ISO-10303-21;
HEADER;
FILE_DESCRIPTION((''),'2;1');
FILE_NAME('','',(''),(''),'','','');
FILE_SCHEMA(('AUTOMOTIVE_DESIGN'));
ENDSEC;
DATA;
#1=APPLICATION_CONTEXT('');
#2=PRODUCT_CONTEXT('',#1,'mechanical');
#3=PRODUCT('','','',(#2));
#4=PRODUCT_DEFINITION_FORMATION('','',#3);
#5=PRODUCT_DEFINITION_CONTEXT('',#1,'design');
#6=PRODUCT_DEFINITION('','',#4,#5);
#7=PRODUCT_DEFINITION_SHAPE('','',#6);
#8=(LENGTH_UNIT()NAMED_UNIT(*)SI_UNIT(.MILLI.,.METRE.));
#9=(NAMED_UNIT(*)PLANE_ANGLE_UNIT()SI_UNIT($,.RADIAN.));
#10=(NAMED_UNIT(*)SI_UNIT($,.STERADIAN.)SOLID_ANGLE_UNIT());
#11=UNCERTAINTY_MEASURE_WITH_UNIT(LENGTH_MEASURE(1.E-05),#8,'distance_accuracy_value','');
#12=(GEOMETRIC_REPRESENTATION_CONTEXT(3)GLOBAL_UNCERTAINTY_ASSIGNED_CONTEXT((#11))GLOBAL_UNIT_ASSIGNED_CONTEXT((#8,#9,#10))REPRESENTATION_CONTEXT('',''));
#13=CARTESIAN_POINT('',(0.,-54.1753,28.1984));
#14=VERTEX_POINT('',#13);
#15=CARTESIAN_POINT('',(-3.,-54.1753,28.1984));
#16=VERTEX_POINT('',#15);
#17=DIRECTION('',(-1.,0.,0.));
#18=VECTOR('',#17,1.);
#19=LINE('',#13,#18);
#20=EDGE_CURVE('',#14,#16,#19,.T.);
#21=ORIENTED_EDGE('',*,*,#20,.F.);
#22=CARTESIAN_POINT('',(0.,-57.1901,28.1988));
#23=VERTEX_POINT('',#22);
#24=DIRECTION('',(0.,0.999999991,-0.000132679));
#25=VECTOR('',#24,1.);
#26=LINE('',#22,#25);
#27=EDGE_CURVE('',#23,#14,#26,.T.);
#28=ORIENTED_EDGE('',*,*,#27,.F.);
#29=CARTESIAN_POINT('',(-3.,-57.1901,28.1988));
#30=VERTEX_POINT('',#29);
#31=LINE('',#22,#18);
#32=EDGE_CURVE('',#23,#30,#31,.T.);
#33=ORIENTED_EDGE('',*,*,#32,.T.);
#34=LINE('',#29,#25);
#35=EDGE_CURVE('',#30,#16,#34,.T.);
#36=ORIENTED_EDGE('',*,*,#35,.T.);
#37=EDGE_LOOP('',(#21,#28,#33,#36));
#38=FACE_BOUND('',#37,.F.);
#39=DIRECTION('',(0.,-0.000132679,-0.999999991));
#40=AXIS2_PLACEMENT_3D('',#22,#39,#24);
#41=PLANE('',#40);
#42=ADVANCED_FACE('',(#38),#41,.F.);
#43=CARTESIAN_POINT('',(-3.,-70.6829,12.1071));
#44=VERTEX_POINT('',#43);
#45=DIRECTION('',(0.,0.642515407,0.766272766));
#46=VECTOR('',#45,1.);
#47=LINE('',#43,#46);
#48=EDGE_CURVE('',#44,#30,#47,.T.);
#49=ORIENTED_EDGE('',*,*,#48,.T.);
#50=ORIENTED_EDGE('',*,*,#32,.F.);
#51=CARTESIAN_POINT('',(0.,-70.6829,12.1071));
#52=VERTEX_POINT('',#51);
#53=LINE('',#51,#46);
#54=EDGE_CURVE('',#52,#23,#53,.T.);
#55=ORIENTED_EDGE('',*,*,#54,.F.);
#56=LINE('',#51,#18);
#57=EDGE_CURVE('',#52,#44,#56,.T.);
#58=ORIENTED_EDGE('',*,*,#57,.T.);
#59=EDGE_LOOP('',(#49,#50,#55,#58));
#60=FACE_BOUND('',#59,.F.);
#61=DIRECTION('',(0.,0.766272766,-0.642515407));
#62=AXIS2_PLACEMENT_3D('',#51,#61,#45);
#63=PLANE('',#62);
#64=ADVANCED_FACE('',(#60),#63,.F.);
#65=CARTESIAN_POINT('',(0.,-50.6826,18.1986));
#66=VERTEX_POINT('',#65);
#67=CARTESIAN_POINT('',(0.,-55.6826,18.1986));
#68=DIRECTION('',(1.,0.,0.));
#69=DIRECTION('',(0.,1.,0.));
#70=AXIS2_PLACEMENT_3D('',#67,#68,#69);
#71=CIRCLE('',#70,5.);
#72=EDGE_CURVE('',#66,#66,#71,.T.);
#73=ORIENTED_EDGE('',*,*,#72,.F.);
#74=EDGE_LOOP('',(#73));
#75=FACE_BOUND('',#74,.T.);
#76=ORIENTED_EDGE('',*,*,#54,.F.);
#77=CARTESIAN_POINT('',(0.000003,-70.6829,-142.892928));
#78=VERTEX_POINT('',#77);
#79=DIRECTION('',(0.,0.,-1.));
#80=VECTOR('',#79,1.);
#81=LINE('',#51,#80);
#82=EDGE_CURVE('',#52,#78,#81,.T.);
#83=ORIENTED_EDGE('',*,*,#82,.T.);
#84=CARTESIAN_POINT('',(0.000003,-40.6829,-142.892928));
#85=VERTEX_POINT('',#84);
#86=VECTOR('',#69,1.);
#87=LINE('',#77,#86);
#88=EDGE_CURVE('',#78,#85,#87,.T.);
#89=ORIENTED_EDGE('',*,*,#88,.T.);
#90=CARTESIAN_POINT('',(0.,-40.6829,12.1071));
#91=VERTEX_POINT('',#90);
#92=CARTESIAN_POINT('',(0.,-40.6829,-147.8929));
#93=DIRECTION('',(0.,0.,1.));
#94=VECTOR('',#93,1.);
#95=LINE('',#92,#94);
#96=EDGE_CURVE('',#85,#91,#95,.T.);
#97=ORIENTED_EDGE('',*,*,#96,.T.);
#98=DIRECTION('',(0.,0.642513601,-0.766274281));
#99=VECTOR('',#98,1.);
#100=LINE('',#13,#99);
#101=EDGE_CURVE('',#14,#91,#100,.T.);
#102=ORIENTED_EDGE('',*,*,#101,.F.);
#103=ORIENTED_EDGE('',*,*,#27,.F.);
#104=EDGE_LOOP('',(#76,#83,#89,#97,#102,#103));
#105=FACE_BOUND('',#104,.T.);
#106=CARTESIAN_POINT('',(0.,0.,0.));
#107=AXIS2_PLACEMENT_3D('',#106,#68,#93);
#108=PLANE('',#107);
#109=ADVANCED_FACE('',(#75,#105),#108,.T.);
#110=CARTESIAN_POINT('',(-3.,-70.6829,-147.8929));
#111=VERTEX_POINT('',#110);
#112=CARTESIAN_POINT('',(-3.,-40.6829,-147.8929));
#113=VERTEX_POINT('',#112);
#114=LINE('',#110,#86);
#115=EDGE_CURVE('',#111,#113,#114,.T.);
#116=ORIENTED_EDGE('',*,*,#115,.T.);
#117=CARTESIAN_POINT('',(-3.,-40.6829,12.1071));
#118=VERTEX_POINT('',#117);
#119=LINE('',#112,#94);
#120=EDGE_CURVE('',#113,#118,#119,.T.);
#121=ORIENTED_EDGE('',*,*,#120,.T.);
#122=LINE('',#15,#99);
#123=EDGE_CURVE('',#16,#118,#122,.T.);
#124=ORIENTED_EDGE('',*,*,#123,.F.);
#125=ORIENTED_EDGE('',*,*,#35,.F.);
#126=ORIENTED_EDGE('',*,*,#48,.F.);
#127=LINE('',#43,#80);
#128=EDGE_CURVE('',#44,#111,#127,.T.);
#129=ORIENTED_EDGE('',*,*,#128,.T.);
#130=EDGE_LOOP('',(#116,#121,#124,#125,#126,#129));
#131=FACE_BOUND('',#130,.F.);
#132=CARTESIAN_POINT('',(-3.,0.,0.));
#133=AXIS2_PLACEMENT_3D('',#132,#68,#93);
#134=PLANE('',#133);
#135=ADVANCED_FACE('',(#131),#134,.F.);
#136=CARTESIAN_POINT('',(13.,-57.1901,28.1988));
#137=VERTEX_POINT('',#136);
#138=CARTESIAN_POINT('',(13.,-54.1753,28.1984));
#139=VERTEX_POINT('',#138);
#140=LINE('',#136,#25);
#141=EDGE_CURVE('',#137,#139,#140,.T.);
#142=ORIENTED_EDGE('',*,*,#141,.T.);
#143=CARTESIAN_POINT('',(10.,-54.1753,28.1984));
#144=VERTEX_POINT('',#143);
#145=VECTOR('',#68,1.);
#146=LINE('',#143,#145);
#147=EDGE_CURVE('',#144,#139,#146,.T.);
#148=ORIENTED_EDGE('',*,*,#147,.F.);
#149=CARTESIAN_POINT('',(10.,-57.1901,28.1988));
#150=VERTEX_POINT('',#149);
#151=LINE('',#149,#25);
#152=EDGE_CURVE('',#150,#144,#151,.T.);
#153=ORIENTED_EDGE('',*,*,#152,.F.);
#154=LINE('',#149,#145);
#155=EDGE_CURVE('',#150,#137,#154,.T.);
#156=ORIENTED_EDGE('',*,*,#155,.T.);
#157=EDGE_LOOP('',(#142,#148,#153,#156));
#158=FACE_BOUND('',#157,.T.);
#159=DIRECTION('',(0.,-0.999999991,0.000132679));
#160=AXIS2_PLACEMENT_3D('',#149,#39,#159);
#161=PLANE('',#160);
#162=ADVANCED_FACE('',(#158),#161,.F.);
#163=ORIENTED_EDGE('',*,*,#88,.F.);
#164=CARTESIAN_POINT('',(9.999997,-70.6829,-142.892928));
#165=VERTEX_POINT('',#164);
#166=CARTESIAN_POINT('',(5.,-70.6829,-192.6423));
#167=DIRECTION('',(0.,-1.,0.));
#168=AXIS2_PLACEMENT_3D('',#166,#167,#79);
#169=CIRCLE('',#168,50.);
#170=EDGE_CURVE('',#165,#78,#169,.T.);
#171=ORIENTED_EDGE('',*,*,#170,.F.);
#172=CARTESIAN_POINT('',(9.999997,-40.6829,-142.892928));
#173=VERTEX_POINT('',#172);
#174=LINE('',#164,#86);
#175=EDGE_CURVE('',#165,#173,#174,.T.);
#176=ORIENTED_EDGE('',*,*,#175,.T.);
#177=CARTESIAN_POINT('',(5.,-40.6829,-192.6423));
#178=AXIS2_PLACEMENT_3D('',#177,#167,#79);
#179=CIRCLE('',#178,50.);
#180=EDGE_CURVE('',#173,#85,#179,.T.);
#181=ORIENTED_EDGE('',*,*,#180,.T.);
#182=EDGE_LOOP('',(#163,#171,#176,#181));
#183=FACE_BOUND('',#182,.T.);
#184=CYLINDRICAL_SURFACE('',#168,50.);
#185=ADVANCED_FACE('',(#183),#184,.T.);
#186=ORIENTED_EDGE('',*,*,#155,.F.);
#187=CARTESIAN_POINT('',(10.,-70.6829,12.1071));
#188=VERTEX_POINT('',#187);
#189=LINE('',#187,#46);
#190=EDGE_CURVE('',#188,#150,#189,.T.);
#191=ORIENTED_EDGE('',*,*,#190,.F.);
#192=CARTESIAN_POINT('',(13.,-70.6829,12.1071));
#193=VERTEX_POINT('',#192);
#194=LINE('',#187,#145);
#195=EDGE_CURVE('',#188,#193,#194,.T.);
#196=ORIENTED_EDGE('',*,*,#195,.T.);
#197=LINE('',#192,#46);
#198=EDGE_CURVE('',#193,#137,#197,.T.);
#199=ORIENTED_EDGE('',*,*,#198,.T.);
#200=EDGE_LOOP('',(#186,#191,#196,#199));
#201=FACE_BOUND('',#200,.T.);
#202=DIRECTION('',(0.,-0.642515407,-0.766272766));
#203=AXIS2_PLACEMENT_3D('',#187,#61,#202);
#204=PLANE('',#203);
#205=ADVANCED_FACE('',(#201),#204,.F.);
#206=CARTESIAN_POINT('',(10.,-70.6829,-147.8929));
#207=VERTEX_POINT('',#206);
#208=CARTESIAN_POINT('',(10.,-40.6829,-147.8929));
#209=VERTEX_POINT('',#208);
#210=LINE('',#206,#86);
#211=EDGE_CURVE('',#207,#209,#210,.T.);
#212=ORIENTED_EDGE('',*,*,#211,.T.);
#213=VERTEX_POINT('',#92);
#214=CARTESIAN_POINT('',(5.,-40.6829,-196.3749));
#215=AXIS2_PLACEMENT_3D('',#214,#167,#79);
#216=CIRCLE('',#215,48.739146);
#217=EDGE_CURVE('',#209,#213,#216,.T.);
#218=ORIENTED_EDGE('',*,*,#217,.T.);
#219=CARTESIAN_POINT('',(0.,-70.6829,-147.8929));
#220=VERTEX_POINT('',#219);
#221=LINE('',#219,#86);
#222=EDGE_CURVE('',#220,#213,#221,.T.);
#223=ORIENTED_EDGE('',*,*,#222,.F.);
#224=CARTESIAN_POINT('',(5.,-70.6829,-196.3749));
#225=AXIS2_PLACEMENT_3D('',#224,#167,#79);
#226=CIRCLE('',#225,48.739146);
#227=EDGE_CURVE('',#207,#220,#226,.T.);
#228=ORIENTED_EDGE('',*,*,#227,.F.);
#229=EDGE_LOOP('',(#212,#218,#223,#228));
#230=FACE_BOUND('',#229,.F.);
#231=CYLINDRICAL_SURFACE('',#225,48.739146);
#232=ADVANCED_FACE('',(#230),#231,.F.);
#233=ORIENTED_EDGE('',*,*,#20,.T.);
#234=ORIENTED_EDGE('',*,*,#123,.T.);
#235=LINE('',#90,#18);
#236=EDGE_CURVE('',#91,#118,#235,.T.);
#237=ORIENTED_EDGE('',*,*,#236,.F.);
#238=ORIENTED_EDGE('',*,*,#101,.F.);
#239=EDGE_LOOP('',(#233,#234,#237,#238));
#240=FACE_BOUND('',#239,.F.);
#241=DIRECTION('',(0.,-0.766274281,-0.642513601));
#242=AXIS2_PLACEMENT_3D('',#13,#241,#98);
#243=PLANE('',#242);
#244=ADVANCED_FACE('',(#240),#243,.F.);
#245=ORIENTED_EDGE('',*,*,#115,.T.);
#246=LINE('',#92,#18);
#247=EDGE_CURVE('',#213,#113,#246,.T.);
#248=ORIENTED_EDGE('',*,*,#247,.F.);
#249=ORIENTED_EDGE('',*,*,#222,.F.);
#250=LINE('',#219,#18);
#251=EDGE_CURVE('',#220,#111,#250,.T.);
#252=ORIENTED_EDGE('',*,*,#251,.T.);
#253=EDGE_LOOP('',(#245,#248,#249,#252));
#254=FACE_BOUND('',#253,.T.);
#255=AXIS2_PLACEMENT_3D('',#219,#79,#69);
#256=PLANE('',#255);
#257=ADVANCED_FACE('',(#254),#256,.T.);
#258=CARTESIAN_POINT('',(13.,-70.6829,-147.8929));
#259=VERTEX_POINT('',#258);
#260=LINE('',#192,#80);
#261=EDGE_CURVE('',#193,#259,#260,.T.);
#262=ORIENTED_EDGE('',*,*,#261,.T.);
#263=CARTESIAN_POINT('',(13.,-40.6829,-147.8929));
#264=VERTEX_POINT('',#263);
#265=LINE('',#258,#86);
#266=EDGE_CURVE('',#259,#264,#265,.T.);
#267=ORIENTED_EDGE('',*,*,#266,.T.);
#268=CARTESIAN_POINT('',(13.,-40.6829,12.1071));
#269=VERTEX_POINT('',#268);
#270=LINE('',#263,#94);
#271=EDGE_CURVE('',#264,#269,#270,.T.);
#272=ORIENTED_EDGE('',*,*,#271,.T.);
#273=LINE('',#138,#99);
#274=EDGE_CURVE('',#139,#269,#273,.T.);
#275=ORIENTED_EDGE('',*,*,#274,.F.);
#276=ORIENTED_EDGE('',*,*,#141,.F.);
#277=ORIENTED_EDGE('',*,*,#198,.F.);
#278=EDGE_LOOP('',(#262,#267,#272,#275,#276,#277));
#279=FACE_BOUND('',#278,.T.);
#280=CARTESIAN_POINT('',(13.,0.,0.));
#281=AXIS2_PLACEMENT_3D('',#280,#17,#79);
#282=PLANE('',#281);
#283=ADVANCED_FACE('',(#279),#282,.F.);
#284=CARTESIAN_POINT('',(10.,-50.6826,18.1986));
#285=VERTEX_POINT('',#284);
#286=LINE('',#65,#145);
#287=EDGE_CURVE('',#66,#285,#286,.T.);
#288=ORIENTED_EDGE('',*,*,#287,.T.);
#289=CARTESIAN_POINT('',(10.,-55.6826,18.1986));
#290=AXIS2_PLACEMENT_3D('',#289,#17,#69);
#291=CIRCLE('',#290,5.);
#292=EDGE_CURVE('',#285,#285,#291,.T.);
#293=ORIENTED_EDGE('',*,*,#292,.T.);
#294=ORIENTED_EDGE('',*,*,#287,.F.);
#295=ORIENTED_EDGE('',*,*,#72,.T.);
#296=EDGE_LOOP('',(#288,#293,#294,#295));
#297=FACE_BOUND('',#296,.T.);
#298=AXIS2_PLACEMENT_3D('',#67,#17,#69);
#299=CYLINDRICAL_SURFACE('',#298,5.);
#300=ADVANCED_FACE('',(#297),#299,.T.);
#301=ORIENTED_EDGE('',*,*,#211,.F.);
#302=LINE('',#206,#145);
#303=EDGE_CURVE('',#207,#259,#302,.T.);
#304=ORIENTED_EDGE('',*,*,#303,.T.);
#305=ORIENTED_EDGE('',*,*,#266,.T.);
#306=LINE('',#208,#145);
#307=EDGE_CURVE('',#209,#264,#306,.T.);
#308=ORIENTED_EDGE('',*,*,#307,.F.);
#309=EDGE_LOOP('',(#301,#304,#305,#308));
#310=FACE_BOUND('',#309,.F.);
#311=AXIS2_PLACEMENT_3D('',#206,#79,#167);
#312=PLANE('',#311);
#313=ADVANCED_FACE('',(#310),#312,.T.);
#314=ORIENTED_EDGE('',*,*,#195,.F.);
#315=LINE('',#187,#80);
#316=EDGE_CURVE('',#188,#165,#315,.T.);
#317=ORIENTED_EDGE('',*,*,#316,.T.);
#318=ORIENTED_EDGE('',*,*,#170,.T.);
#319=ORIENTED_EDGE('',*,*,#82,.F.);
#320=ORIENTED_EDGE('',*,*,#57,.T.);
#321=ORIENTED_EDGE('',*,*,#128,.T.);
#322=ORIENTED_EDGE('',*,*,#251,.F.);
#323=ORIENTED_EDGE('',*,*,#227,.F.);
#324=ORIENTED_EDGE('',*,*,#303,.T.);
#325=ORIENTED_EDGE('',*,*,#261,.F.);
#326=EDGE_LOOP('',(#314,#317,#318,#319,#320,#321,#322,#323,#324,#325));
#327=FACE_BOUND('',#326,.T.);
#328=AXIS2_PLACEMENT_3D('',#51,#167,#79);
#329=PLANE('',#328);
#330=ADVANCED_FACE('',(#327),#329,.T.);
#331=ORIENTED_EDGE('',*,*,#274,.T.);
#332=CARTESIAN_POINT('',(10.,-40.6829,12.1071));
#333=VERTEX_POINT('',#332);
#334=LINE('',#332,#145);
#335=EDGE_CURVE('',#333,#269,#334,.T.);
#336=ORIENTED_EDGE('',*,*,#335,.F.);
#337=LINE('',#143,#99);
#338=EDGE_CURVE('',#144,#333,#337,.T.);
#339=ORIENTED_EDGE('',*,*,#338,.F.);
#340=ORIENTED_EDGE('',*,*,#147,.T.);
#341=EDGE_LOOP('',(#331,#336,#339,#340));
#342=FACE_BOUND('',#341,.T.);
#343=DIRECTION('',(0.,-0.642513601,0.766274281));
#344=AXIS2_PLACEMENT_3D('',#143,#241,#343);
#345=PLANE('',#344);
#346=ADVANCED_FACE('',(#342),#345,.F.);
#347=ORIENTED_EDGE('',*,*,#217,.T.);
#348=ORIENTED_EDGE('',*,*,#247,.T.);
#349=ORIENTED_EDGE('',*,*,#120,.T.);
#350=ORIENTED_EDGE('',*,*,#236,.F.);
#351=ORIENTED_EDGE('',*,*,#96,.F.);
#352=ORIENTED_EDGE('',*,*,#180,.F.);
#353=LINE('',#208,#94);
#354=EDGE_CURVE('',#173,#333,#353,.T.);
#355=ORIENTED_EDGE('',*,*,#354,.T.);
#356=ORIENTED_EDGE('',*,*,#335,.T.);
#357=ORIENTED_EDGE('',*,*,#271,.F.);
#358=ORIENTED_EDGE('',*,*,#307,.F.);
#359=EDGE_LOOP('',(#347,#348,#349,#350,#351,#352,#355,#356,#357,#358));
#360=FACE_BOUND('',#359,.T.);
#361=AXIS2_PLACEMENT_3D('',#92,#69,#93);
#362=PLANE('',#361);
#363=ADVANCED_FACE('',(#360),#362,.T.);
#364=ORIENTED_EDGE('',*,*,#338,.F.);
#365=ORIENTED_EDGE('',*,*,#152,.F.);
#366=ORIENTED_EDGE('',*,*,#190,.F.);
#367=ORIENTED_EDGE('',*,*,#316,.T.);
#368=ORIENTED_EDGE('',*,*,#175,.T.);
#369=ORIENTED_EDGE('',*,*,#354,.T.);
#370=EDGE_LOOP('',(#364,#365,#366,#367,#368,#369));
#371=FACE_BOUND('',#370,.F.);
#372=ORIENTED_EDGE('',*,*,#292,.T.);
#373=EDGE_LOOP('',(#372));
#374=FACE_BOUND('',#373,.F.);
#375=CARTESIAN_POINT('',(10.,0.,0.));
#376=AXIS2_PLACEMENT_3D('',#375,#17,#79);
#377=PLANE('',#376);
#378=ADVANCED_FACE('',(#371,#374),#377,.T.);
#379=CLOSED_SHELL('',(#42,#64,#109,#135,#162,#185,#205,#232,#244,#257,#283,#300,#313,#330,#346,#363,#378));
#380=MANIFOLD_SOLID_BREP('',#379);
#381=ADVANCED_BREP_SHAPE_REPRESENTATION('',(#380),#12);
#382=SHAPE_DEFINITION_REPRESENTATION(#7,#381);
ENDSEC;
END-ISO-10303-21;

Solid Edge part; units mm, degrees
sketch "Sketch1" plane through (0, 0, 0) normal (1, 0, 0) x (0, 1, 0)
  line L0 (-70.6829, -147.8929) -> (-40.6829, -147.8929)
  line L1 (-40.6829, -147.8929) -> (-40.6829, 12.1071)
  line L2 (-40.6829, 12.1071) -> (-70.6829, 12.1071)
  line L3 (-70.6829, 12.1071) -> (-70.6829, -147.8929)
  line L4 (-70.6829, 12.1071) -> (-40.6829, 12.1071)
  line L5 (-54.1753, 28.1984) -> (-40.6829, 12.1071)
  line L6 (-57.1901, 28.1988) -> (-54.1753, 28.1984)
  line L7 (-70.6829, 12.1071) -> (-57.1901, 28.1988)
  dimension "D1" = 30
  dimension "D2" = 20.9994
  dimension "D3" = 21
  dimension "D4" = 160
  dimension "D5" = 30
extrude "Protrusion1" add sketch "Sketch1" against normal blind 3
sketch "Sketch2" plane through (0, -21.8205, 20.1807) normal (1, 0, 0) x (0, 1, 0)
  circle A0 centre (-33.8621, -1.9821) radius 5
  dimension "D1" = 10
extrude "ExtrudedProtrusion_2" add sketch "Sketch2" along normal blind 11
mirror "Mirror1" about plane through (5, -21.8205, 20.1506) normal (1, 0, 0) of "Protrusion1"
sketch "Sketch3" plane through (11.5, -70.6829, -27.8929) normal (0, -1, 0) x (0, 0, -1)
  arc A0 (120, -1.5) -> (120, -11.5) centre (168.482, -6.5) ccw
  line L0 (115, -1.5) -> (120, -1.5)
  arc A1 (115, -1.5) -> (115, -11.5) centre (164.7494, -6.5) ccw
  line L1 (120, -11.5) -> (115, -11.5)
  dimension "D1" = 5
extrude "ExtrudedProtrusion_4" add sketch "Sketch3" against normal blind 30
